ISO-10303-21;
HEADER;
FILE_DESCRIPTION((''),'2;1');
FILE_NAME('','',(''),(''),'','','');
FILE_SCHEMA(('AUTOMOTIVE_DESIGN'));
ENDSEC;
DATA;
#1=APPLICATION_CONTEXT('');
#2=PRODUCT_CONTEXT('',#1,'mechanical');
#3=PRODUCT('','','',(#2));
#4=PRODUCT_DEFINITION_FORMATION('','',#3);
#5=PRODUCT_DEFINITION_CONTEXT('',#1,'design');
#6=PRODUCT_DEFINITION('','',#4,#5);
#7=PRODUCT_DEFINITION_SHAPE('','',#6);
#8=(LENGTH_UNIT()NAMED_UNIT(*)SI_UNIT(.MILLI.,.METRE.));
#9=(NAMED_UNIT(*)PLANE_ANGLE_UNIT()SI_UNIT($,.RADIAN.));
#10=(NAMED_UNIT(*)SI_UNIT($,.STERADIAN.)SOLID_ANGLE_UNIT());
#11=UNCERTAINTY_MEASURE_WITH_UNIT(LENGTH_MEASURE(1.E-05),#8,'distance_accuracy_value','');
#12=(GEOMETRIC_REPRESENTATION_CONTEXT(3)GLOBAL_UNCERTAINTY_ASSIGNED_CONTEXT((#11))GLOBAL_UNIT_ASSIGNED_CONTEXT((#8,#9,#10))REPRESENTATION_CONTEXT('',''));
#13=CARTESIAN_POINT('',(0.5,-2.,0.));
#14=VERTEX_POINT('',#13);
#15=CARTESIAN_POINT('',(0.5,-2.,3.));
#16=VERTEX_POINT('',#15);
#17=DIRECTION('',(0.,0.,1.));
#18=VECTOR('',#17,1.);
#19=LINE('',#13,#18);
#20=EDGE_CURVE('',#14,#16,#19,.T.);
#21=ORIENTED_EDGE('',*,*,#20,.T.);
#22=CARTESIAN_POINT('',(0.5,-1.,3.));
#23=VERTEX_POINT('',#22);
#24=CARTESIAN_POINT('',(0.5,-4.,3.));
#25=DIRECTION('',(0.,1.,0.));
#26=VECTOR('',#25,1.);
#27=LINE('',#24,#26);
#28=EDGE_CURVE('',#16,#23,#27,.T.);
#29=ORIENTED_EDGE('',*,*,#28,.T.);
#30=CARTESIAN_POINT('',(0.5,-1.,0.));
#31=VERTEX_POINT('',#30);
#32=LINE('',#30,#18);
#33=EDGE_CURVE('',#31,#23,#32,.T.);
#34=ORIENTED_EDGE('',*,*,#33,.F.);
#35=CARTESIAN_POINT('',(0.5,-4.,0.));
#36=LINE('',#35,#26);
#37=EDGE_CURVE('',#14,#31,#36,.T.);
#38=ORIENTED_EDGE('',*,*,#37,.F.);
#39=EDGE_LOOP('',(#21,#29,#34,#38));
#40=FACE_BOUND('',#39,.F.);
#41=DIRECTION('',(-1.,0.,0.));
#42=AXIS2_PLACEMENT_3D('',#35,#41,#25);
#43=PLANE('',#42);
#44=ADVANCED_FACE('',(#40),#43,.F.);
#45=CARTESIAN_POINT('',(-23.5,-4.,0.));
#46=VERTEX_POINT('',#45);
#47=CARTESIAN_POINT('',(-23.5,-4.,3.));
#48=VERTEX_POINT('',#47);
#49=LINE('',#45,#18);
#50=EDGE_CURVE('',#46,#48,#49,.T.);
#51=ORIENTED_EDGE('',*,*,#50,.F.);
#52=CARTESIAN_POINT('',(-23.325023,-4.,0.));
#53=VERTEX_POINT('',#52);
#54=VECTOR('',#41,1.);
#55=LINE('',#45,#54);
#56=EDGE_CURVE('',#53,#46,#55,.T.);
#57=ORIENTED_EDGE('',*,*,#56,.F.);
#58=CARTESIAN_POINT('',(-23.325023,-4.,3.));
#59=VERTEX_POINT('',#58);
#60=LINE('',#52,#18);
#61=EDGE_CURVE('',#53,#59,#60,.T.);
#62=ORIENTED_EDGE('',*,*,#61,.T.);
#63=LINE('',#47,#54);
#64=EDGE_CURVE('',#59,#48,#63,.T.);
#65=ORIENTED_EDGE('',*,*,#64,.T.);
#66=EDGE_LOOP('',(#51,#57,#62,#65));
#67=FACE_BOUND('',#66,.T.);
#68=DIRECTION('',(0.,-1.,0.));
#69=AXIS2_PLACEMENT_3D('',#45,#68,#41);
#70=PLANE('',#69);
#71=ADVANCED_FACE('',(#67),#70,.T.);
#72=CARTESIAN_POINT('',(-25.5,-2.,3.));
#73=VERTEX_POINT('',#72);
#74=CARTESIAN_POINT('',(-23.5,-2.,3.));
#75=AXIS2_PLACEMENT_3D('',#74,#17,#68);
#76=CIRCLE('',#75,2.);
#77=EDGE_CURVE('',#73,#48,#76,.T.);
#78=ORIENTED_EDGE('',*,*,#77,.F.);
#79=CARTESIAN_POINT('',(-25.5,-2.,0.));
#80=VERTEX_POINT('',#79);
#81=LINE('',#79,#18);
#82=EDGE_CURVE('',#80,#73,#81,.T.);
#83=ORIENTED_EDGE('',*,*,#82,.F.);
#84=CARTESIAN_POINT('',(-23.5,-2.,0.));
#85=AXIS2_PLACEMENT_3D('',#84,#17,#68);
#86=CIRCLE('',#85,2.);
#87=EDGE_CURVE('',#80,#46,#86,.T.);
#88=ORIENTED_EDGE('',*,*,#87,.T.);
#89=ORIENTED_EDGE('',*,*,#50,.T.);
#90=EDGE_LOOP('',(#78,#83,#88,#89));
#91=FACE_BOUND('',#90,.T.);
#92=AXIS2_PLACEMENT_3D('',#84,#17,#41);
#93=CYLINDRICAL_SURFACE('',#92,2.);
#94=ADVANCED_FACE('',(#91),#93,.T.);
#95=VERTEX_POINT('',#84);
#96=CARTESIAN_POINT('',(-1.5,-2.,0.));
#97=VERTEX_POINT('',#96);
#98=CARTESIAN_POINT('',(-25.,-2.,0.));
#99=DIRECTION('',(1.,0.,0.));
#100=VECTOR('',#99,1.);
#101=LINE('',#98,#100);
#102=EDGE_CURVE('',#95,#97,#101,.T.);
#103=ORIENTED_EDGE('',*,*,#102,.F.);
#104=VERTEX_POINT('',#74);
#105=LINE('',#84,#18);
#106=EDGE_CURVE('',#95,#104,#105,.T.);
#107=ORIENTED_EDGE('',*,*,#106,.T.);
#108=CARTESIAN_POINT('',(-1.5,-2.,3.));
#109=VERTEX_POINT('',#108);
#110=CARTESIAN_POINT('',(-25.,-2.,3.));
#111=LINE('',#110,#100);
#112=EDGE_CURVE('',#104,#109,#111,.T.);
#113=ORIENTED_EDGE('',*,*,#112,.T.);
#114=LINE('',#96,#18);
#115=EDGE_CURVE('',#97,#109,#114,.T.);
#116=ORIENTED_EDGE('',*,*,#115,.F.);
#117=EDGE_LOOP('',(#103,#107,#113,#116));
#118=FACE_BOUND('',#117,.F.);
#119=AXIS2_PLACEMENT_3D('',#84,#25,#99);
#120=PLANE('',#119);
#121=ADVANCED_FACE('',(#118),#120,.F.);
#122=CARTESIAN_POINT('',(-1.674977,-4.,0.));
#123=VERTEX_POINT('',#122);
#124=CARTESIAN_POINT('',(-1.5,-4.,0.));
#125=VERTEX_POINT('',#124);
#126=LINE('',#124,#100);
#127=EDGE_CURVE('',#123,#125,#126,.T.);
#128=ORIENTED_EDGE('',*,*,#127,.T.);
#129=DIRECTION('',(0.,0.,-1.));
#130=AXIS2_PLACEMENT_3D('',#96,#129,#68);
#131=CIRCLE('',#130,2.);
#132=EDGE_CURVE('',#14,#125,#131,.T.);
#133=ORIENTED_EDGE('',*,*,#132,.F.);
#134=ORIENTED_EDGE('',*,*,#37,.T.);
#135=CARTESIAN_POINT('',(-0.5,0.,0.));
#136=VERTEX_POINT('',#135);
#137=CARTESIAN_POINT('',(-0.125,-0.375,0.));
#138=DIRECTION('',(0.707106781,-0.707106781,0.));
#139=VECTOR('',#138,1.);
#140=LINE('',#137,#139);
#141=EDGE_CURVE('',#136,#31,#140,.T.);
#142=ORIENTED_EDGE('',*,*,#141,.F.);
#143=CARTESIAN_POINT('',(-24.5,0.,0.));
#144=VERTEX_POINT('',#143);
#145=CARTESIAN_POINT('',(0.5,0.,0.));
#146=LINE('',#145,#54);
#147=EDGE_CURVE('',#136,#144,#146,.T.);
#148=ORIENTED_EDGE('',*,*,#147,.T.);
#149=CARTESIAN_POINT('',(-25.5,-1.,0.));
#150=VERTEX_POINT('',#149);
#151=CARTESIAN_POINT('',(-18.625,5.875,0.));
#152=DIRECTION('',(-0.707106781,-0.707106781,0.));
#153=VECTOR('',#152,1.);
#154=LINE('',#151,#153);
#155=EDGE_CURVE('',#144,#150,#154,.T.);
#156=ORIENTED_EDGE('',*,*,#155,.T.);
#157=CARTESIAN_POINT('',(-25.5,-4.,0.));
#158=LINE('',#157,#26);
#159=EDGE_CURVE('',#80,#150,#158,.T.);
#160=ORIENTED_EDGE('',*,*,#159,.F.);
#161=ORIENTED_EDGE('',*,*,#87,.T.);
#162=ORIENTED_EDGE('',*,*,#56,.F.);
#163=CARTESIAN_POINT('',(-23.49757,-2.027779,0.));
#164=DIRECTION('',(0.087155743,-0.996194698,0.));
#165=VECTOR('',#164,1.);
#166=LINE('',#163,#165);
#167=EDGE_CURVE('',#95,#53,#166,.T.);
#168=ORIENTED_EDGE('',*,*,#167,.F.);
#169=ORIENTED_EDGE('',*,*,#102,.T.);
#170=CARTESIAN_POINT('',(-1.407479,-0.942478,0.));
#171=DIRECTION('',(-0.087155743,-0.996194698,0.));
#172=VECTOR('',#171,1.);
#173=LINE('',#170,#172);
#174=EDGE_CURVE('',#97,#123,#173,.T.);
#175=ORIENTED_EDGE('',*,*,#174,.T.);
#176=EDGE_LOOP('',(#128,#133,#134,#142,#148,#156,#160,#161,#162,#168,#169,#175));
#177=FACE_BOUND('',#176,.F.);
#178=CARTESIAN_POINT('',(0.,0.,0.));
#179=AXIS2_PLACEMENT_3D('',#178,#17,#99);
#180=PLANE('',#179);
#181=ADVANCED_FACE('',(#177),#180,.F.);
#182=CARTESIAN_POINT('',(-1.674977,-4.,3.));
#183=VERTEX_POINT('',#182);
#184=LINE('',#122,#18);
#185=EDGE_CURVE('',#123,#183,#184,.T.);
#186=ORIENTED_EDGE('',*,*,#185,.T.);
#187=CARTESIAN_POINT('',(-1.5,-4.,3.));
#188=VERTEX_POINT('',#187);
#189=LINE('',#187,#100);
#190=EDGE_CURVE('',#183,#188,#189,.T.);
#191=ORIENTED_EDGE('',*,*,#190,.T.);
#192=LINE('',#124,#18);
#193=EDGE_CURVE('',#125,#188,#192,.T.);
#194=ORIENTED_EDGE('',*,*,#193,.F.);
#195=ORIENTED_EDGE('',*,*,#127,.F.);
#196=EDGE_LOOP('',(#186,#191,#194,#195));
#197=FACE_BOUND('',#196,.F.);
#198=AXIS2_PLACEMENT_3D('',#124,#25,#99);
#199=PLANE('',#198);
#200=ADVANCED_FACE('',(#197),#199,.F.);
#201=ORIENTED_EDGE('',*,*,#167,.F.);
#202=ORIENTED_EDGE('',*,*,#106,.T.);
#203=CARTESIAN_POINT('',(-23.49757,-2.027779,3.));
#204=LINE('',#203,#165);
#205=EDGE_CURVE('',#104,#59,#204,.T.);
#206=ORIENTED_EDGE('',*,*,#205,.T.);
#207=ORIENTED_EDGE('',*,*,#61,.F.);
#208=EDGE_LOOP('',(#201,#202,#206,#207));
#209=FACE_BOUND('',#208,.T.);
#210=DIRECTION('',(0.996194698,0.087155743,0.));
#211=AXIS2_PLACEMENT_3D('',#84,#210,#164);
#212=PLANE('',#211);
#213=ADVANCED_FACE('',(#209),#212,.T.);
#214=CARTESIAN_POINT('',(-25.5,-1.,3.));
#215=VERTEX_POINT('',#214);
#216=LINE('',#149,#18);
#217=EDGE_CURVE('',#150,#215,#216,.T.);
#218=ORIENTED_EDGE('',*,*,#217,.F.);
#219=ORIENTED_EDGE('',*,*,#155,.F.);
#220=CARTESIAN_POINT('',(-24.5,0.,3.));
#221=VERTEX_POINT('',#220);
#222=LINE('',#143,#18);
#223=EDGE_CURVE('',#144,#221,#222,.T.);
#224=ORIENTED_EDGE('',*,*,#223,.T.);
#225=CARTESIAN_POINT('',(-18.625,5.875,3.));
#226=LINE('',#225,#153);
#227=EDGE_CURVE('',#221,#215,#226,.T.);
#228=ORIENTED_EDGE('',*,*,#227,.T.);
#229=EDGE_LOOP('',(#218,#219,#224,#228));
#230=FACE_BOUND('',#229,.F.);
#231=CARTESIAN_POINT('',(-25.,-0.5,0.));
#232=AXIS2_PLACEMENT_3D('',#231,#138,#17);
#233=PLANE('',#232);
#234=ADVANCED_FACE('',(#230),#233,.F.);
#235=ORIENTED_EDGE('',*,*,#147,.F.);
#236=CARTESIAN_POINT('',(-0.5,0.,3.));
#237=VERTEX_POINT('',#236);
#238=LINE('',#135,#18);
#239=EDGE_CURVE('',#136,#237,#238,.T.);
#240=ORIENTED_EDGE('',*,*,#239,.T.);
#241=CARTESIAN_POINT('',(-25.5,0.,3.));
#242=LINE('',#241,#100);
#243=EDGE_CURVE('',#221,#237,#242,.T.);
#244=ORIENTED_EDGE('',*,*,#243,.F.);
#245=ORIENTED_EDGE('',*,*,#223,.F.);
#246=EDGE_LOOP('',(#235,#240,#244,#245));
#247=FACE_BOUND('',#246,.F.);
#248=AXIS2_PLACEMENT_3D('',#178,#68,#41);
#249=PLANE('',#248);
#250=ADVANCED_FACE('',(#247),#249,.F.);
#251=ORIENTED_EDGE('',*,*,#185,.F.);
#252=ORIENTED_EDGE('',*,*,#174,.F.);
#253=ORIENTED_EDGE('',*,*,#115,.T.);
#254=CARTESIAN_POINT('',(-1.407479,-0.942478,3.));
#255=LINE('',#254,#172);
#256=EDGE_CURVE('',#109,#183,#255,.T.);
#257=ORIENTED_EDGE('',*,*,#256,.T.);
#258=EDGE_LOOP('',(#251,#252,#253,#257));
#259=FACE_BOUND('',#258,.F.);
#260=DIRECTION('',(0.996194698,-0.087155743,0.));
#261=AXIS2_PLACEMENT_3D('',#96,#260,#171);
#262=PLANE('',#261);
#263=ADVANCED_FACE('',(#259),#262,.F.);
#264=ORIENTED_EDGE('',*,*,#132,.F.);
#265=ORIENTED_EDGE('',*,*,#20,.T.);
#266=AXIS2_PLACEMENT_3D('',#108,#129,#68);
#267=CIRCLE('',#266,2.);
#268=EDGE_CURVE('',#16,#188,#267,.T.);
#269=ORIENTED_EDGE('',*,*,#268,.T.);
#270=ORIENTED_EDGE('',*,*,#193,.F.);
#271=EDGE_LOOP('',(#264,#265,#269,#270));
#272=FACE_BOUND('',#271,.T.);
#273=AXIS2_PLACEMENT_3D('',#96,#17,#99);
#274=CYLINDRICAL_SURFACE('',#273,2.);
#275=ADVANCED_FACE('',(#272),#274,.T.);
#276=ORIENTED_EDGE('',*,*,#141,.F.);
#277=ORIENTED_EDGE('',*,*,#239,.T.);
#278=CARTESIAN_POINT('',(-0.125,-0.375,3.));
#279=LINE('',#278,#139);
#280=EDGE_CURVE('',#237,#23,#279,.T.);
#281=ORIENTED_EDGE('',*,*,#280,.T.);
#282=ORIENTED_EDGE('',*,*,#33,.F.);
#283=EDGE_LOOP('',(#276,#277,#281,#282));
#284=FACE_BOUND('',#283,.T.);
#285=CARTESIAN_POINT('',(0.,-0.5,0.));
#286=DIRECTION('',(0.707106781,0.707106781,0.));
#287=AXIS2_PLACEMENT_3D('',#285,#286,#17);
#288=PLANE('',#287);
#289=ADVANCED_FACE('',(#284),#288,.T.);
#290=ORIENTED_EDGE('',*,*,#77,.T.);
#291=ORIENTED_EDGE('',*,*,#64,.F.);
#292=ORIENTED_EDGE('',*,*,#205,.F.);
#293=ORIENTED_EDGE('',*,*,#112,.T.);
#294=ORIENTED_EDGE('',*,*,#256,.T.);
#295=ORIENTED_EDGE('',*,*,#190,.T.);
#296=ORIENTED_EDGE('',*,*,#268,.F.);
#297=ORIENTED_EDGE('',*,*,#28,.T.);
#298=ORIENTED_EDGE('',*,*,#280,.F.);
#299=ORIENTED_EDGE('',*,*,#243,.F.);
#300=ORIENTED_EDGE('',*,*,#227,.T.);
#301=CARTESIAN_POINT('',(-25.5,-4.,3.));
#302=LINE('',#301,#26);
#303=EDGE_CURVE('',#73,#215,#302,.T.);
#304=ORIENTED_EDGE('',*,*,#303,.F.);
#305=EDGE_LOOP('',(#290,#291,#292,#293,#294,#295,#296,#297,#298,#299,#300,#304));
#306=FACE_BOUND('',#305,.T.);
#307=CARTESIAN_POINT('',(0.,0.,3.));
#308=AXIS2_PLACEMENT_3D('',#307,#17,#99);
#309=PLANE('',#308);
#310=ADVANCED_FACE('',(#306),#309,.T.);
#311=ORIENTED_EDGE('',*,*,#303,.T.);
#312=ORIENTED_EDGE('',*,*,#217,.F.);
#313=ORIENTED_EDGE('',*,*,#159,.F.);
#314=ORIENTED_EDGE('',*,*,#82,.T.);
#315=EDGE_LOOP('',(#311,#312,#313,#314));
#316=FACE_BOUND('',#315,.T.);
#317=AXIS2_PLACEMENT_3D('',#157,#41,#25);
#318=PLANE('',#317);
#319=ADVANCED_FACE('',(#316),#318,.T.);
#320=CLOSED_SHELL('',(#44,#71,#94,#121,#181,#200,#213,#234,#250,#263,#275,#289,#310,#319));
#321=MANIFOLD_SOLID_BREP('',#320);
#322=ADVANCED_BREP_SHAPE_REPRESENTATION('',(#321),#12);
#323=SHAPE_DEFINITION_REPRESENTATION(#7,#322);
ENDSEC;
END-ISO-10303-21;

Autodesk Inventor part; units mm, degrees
ref_plane "YZ Plane" through (0, 0, 0) normal (1, 0, 0) x (0, 1, 0)
ref_plane "XZ Plane" through (0, 0, 0) normal (0, 1, 0) x (-1, 0, 0)
ref_plane "XY Plane" through (0, 0, 0) normal (0, 0, 1) x (1, 0, 0)
sketch "Sketch2" plane through (0, 0, 0) normal (0, 0, 1) x (1, 0, 0)
  line L0 (0, 0) -> (-25, 0)
  line L1 (-25, 0) -> (-25, -2)
  line L2 (-25, -2) -> (0, -2)
  line L3 (0, -2) -> (0, 0)
  line L4 (-25.5, 0) -> (-23.5, 0)
  line L5 (-23.5, 0) -> (-23.5, -4)
  line L6 (-23.5, -4) -> (-25.5, -4)
  line L7 (-25.5, -4) -> (-25.5, 0)
  line L8 (0.5, 0) -> (-1.5, 0)
  line L9 (-1.5, 0) -> (-1.5, -4)
  line L10 (-1.5, -4) -> (0.5, -4)
  line L11 (0.5, -4) -> (0.5, 0)
  point P0 (-23.5, -2)
  point P1 (-1.5, -2)
  dimension "d0" = 25
  dimension "d1" = 2
  dimension "d2" = 2
  dimension "d3" = 4
  dimension "d4" = 2
  dimension "d5" = 4
extrude "Extrusion1" add sketch "Sketch2" along normal blind 3
chamfer "Chamfer1" distance 1 angle 45 2 edges at (-25.5, 0, 1.5) (0.5, 0, 1.5)
draft "FaceDraft1" angle -5 pull direction (0, -1, 0) faces at (-23.5, -3.3333, 1) fixed edges at (-23.5, -2, 1.5)
draft "FaceDraft2" angle -5 pull direction (0, -1, 0) faces at (-1.5, -2.6667, 1) fixed edges at (-1.5, -2, 1.5)
fillet "Fillet1" radius 2 2 edges at (-25.5, -4, 1.5) (0.5, -4, 1.5)
properties part number "Clip"
